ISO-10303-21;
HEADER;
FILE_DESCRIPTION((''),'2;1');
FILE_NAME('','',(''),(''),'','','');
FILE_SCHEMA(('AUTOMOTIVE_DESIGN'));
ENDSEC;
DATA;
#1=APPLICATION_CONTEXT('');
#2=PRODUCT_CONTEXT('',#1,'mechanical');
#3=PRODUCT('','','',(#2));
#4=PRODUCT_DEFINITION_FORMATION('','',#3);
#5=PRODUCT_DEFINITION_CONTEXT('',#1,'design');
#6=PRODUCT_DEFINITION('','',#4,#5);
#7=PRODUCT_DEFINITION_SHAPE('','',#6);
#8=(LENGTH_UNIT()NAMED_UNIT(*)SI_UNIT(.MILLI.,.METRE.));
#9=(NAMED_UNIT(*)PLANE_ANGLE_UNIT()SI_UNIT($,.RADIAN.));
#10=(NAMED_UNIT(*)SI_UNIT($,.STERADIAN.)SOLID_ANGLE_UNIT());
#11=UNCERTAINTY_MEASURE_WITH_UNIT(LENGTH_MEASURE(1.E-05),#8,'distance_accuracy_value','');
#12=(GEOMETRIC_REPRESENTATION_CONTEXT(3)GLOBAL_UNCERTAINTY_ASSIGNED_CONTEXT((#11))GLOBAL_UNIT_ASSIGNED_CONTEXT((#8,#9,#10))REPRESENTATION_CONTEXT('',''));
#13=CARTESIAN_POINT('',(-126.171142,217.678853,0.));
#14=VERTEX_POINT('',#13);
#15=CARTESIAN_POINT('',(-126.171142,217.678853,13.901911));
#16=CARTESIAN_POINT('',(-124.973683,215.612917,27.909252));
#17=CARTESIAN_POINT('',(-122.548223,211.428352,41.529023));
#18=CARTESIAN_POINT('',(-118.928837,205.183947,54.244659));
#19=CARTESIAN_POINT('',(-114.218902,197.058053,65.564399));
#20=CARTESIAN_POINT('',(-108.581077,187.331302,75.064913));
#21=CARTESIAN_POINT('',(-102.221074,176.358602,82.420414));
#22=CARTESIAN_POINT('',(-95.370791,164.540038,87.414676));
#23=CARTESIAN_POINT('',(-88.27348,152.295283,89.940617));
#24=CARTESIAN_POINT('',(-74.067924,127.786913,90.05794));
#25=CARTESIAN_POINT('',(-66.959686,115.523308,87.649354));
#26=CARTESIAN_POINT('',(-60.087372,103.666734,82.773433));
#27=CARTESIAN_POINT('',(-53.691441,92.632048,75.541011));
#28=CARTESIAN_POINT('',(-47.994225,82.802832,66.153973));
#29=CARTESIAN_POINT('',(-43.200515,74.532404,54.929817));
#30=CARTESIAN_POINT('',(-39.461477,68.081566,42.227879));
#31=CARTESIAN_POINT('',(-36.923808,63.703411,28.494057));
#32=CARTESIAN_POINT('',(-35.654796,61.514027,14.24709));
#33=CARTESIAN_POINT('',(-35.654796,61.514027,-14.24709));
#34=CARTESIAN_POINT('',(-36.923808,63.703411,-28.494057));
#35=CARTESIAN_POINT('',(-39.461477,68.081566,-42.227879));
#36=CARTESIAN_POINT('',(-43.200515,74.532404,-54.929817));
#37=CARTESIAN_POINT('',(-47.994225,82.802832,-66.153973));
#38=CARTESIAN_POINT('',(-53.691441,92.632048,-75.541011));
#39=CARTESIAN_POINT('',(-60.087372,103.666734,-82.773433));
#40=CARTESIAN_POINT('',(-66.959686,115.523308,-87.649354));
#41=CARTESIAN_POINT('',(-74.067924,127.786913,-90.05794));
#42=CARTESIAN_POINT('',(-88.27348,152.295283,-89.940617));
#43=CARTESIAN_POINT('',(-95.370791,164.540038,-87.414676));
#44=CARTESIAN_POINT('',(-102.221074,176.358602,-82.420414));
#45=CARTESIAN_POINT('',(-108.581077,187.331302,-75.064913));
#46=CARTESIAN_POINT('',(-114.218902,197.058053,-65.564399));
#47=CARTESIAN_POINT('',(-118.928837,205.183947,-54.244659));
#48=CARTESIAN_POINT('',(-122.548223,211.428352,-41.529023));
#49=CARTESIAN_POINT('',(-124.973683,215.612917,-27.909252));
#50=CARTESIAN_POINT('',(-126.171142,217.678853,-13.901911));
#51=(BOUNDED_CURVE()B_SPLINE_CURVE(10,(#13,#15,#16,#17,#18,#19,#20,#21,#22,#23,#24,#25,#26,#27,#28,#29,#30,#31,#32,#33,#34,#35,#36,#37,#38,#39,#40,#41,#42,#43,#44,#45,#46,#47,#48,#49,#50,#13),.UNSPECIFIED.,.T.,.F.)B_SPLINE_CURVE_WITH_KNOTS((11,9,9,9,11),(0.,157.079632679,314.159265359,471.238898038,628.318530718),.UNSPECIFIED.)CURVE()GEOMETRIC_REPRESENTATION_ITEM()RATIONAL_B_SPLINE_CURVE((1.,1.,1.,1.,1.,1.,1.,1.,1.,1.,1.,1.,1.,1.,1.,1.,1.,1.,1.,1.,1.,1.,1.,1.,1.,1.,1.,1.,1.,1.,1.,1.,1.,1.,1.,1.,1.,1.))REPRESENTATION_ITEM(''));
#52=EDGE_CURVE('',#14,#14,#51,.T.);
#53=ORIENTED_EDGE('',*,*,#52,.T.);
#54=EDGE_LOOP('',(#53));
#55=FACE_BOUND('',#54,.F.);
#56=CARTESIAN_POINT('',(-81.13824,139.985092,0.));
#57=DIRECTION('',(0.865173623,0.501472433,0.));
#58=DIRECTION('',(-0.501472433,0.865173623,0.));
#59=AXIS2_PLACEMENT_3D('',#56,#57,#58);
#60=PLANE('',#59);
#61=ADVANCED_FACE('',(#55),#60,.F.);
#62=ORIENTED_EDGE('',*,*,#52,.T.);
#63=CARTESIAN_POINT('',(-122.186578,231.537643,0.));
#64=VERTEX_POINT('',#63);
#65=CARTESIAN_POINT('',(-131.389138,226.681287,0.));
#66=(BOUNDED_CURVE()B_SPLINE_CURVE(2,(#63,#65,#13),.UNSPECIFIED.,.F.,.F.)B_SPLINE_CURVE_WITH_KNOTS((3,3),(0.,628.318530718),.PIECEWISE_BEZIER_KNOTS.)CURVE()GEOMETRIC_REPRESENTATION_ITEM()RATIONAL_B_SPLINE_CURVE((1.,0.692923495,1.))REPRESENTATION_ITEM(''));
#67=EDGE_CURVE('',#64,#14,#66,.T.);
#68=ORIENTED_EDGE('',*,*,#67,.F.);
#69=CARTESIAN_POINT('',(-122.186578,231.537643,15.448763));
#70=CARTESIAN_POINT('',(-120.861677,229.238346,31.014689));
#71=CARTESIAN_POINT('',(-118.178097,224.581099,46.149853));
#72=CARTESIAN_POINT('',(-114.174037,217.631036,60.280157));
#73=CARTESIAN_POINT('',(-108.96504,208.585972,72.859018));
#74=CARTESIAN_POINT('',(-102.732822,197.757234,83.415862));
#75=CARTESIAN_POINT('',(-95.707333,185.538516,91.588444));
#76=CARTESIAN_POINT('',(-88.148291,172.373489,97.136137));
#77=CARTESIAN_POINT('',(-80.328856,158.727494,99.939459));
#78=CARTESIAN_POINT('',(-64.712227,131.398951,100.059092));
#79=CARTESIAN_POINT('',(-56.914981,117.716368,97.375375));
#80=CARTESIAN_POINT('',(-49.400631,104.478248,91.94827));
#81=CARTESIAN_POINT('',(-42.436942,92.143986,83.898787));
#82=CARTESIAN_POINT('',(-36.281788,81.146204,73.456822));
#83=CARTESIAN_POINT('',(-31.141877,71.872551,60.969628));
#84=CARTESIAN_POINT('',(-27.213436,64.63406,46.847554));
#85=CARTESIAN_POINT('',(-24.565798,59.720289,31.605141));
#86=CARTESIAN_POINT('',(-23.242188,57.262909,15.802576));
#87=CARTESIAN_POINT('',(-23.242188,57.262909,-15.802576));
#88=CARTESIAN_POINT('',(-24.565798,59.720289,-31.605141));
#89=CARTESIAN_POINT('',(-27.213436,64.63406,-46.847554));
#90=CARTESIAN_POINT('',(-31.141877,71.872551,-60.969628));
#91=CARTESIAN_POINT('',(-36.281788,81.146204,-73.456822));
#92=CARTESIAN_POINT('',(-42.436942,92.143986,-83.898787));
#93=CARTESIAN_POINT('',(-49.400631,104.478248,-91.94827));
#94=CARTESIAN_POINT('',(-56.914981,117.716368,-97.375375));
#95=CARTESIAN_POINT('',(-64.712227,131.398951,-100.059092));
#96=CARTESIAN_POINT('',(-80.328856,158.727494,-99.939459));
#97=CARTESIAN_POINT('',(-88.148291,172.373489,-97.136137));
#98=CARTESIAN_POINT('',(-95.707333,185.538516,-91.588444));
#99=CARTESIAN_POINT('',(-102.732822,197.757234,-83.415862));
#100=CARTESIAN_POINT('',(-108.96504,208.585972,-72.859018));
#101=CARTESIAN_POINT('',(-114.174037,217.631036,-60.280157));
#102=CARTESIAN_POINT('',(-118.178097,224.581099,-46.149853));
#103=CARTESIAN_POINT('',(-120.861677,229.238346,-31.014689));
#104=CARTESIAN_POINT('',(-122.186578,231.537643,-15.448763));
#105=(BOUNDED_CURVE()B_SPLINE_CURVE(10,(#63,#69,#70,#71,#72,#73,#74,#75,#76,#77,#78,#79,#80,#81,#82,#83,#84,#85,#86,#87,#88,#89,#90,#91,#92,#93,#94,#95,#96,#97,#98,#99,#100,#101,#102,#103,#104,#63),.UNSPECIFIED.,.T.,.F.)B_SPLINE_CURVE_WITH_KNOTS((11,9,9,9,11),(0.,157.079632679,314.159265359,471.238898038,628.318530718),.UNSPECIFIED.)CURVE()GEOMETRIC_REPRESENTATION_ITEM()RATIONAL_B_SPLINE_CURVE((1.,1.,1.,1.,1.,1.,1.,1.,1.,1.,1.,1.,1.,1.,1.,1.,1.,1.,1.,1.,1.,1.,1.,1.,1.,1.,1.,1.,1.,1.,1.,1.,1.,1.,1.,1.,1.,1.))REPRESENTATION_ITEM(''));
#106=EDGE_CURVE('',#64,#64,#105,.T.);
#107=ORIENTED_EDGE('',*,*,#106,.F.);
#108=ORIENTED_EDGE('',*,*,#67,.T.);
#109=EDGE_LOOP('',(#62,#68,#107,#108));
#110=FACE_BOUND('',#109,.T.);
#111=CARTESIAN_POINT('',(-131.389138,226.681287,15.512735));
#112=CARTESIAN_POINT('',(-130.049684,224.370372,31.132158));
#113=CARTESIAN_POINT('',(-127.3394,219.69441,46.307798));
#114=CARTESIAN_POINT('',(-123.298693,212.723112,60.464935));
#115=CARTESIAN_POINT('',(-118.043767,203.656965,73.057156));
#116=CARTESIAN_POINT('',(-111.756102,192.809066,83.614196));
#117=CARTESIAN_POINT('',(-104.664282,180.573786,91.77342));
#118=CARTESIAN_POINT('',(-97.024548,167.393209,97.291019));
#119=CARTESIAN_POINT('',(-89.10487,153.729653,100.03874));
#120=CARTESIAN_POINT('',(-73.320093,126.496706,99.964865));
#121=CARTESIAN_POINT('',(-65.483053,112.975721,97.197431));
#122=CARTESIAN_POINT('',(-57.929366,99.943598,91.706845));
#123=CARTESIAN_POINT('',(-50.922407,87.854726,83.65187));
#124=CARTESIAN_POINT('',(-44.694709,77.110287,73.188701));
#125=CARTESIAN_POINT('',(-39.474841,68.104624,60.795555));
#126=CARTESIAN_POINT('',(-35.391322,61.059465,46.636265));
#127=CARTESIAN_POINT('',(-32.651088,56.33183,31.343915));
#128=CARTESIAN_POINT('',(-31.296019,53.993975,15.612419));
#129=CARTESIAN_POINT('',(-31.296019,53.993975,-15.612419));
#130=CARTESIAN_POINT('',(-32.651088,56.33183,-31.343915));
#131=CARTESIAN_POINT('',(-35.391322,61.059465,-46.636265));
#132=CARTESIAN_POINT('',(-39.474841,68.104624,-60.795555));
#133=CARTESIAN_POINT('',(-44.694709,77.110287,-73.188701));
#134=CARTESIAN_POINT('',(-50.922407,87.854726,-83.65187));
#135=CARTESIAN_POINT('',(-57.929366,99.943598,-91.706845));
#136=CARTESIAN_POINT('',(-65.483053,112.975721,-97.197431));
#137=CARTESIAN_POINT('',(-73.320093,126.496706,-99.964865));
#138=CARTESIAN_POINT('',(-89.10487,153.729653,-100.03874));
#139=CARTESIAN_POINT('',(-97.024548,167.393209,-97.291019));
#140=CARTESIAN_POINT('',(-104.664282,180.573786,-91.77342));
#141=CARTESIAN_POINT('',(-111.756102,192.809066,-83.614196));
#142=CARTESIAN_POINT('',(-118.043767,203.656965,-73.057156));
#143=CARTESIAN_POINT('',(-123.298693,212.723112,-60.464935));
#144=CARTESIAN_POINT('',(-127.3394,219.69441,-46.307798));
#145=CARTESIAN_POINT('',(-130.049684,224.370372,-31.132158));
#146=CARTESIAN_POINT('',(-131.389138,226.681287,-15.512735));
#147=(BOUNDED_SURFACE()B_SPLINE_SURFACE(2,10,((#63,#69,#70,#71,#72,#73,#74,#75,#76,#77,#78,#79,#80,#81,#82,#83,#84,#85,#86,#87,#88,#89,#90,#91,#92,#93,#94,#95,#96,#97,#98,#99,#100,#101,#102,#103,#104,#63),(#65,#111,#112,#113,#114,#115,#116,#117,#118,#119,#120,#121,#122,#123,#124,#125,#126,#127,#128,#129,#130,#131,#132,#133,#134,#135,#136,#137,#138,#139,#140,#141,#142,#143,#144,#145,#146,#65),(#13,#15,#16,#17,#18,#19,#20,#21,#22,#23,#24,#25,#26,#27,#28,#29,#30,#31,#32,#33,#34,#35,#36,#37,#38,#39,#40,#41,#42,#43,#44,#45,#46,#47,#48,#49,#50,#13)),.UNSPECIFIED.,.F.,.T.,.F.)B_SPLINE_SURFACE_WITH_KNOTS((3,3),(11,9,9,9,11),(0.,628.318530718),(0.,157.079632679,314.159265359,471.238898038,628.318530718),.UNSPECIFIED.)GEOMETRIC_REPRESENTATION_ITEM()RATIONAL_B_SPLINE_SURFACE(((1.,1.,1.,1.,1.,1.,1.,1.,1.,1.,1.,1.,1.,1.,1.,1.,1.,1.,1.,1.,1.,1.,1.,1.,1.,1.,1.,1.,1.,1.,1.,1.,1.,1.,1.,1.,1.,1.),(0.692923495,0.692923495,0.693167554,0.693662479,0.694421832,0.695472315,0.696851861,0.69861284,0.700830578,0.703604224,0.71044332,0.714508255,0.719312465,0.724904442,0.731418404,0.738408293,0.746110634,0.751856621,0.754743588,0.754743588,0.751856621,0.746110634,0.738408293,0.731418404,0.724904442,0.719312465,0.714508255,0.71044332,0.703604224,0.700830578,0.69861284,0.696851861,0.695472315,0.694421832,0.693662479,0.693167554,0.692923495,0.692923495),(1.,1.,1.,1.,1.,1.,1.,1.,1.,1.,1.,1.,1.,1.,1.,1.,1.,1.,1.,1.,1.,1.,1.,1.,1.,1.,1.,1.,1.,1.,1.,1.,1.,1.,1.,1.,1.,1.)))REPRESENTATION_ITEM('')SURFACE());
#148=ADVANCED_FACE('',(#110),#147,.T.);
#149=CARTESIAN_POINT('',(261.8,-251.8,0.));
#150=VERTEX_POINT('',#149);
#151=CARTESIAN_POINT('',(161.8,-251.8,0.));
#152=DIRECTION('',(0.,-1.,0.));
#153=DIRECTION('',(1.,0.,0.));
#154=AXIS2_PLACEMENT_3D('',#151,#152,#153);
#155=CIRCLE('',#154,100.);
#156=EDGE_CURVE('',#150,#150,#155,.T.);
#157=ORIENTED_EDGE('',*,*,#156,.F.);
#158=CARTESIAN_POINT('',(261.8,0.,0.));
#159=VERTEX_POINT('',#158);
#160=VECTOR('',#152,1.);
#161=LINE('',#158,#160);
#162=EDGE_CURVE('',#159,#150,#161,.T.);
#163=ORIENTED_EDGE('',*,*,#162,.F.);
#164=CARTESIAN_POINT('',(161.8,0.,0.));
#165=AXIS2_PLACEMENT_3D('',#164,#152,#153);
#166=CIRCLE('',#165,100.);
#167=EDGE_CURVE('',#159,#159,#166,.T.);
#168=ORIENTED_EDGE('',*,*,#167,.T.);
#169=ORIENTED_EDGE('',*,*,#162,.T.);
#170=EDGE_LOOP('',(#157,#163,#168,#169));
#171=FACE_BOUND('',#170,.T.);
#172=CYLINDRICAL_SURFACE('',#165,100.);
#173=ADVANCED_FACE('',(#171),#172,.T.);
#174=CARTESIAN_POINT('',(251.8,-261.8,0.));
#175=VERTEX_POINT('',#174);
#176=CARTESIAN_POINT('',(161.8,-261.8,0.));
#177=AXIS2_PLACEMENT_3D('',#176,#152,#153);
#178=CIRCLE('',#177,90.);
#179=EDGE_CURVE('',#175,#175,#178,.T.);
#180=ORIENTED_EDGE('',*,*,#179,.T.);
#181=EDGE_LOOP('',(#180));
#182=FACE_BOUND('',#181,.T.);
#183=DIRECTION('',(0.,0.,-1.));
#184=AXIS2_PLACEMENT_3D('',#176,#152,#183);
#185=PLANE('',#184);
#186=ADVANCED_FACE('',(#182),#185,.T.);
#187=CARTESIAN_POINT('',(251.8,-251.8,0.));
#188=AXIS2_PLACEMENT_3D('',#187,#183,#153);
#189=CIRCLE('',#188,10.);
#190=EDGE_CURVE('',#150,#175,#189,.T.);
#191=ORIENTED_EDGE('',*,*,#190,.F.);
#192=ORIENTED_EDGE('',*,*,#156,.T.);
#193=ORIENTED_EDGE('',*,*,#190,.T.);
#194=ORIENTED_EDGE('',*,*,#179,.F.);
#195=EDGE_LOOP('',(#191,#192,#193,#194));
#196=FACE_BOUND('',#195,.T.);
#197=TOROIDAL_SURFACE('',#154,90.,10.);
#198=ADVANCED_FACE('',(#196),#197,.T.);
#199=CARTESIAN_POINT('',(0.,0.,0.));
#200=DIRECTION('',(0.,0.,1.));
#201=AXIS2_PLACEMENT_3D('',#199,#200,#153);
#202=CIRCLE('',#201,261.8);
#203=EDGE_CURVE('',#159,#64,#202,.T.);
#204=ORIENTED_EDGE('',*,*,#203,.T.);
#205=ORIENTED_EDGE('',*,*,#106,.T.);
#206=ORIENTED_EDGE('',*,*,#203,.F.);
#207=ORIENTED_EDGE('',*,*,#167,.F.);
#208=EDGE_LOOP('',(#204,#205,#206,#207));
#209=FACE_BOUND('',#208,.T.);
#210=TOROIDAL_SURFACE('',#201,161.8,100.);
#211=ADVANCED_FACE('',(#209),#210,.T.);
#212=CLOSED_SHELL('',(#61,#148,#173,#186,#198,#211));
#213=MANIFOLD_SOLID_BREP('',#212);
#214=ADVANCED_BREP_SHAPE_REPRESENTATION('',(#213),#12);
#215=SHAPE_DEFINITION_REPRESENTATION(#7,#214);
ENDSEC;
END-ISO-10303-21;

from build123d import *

# Parameters (mm, degrees)
F1_R      = 100
F2_FACE_R = 100
F4_R      = 158.537666862
F4_R_2    = 100
F5_DEPTH  = 261
F6_R      = 10
F7_R      = 10


with BuildPart() as f2:
    # F2: sweep along a path in F0
    with BuildLine(Plane.XY) as f2_path:
        ThreePointArc((161.8, 0), (80.7807923206, 140.1916673417), (-81.1382397041, 139.9850922696))
    # F1 (on Front) → F2 (sweep)
    with BuildSketch(Plane.XZ):
        with Locations((161.8, 0)):
            Circle(F1_R)
    sweep(path=f2_path.line)

    # F3: sweep along a path in F0
    with BuildLine(Plane.XY) as f3_path:
        Line((161.8, 0), (161.8, -261.8))
    # F2_face (on face) → F3 (sweep)
    with BuildSketch(Plane(origin=(161.8, 0, 0), x_dir=(1, 0, 0), z_dir=(0, -1, 0))):
        Circle(F2_FACE_R)
    sweep(path=f3_path.line)

    # F4 (on face) → F5 (cut)
    with BuildSketch(Plane.XZ.offset(261.8)):
        with Locations((161.8, 0)):
            Circle(F4_R)
        with Locations((161.8, 0)):
            Circle(F4_R_2, mode=Mode.SUBTRACT)
    extrude(amount=-F5_DEPTH, mode=Mode.SUBTRACT)

    # F6
    f6_edges = [f2.edges().sort_by_distance(p)[0] for p in [
        (61.8, 0, 0),
        (61.8, -261.8, 0),
        (261.8, -130.9, 0),
    ]]
    fillet(f6_edges, radius=F6_R)

    # F7
    f7_edges = [f2.edges().sort_by_distance(p)[0] for p in [
        (-30.990996, 53.46773, 0),
    ]]
    fillet(f7_edges, radius=F7_R)


solid = f2.part
